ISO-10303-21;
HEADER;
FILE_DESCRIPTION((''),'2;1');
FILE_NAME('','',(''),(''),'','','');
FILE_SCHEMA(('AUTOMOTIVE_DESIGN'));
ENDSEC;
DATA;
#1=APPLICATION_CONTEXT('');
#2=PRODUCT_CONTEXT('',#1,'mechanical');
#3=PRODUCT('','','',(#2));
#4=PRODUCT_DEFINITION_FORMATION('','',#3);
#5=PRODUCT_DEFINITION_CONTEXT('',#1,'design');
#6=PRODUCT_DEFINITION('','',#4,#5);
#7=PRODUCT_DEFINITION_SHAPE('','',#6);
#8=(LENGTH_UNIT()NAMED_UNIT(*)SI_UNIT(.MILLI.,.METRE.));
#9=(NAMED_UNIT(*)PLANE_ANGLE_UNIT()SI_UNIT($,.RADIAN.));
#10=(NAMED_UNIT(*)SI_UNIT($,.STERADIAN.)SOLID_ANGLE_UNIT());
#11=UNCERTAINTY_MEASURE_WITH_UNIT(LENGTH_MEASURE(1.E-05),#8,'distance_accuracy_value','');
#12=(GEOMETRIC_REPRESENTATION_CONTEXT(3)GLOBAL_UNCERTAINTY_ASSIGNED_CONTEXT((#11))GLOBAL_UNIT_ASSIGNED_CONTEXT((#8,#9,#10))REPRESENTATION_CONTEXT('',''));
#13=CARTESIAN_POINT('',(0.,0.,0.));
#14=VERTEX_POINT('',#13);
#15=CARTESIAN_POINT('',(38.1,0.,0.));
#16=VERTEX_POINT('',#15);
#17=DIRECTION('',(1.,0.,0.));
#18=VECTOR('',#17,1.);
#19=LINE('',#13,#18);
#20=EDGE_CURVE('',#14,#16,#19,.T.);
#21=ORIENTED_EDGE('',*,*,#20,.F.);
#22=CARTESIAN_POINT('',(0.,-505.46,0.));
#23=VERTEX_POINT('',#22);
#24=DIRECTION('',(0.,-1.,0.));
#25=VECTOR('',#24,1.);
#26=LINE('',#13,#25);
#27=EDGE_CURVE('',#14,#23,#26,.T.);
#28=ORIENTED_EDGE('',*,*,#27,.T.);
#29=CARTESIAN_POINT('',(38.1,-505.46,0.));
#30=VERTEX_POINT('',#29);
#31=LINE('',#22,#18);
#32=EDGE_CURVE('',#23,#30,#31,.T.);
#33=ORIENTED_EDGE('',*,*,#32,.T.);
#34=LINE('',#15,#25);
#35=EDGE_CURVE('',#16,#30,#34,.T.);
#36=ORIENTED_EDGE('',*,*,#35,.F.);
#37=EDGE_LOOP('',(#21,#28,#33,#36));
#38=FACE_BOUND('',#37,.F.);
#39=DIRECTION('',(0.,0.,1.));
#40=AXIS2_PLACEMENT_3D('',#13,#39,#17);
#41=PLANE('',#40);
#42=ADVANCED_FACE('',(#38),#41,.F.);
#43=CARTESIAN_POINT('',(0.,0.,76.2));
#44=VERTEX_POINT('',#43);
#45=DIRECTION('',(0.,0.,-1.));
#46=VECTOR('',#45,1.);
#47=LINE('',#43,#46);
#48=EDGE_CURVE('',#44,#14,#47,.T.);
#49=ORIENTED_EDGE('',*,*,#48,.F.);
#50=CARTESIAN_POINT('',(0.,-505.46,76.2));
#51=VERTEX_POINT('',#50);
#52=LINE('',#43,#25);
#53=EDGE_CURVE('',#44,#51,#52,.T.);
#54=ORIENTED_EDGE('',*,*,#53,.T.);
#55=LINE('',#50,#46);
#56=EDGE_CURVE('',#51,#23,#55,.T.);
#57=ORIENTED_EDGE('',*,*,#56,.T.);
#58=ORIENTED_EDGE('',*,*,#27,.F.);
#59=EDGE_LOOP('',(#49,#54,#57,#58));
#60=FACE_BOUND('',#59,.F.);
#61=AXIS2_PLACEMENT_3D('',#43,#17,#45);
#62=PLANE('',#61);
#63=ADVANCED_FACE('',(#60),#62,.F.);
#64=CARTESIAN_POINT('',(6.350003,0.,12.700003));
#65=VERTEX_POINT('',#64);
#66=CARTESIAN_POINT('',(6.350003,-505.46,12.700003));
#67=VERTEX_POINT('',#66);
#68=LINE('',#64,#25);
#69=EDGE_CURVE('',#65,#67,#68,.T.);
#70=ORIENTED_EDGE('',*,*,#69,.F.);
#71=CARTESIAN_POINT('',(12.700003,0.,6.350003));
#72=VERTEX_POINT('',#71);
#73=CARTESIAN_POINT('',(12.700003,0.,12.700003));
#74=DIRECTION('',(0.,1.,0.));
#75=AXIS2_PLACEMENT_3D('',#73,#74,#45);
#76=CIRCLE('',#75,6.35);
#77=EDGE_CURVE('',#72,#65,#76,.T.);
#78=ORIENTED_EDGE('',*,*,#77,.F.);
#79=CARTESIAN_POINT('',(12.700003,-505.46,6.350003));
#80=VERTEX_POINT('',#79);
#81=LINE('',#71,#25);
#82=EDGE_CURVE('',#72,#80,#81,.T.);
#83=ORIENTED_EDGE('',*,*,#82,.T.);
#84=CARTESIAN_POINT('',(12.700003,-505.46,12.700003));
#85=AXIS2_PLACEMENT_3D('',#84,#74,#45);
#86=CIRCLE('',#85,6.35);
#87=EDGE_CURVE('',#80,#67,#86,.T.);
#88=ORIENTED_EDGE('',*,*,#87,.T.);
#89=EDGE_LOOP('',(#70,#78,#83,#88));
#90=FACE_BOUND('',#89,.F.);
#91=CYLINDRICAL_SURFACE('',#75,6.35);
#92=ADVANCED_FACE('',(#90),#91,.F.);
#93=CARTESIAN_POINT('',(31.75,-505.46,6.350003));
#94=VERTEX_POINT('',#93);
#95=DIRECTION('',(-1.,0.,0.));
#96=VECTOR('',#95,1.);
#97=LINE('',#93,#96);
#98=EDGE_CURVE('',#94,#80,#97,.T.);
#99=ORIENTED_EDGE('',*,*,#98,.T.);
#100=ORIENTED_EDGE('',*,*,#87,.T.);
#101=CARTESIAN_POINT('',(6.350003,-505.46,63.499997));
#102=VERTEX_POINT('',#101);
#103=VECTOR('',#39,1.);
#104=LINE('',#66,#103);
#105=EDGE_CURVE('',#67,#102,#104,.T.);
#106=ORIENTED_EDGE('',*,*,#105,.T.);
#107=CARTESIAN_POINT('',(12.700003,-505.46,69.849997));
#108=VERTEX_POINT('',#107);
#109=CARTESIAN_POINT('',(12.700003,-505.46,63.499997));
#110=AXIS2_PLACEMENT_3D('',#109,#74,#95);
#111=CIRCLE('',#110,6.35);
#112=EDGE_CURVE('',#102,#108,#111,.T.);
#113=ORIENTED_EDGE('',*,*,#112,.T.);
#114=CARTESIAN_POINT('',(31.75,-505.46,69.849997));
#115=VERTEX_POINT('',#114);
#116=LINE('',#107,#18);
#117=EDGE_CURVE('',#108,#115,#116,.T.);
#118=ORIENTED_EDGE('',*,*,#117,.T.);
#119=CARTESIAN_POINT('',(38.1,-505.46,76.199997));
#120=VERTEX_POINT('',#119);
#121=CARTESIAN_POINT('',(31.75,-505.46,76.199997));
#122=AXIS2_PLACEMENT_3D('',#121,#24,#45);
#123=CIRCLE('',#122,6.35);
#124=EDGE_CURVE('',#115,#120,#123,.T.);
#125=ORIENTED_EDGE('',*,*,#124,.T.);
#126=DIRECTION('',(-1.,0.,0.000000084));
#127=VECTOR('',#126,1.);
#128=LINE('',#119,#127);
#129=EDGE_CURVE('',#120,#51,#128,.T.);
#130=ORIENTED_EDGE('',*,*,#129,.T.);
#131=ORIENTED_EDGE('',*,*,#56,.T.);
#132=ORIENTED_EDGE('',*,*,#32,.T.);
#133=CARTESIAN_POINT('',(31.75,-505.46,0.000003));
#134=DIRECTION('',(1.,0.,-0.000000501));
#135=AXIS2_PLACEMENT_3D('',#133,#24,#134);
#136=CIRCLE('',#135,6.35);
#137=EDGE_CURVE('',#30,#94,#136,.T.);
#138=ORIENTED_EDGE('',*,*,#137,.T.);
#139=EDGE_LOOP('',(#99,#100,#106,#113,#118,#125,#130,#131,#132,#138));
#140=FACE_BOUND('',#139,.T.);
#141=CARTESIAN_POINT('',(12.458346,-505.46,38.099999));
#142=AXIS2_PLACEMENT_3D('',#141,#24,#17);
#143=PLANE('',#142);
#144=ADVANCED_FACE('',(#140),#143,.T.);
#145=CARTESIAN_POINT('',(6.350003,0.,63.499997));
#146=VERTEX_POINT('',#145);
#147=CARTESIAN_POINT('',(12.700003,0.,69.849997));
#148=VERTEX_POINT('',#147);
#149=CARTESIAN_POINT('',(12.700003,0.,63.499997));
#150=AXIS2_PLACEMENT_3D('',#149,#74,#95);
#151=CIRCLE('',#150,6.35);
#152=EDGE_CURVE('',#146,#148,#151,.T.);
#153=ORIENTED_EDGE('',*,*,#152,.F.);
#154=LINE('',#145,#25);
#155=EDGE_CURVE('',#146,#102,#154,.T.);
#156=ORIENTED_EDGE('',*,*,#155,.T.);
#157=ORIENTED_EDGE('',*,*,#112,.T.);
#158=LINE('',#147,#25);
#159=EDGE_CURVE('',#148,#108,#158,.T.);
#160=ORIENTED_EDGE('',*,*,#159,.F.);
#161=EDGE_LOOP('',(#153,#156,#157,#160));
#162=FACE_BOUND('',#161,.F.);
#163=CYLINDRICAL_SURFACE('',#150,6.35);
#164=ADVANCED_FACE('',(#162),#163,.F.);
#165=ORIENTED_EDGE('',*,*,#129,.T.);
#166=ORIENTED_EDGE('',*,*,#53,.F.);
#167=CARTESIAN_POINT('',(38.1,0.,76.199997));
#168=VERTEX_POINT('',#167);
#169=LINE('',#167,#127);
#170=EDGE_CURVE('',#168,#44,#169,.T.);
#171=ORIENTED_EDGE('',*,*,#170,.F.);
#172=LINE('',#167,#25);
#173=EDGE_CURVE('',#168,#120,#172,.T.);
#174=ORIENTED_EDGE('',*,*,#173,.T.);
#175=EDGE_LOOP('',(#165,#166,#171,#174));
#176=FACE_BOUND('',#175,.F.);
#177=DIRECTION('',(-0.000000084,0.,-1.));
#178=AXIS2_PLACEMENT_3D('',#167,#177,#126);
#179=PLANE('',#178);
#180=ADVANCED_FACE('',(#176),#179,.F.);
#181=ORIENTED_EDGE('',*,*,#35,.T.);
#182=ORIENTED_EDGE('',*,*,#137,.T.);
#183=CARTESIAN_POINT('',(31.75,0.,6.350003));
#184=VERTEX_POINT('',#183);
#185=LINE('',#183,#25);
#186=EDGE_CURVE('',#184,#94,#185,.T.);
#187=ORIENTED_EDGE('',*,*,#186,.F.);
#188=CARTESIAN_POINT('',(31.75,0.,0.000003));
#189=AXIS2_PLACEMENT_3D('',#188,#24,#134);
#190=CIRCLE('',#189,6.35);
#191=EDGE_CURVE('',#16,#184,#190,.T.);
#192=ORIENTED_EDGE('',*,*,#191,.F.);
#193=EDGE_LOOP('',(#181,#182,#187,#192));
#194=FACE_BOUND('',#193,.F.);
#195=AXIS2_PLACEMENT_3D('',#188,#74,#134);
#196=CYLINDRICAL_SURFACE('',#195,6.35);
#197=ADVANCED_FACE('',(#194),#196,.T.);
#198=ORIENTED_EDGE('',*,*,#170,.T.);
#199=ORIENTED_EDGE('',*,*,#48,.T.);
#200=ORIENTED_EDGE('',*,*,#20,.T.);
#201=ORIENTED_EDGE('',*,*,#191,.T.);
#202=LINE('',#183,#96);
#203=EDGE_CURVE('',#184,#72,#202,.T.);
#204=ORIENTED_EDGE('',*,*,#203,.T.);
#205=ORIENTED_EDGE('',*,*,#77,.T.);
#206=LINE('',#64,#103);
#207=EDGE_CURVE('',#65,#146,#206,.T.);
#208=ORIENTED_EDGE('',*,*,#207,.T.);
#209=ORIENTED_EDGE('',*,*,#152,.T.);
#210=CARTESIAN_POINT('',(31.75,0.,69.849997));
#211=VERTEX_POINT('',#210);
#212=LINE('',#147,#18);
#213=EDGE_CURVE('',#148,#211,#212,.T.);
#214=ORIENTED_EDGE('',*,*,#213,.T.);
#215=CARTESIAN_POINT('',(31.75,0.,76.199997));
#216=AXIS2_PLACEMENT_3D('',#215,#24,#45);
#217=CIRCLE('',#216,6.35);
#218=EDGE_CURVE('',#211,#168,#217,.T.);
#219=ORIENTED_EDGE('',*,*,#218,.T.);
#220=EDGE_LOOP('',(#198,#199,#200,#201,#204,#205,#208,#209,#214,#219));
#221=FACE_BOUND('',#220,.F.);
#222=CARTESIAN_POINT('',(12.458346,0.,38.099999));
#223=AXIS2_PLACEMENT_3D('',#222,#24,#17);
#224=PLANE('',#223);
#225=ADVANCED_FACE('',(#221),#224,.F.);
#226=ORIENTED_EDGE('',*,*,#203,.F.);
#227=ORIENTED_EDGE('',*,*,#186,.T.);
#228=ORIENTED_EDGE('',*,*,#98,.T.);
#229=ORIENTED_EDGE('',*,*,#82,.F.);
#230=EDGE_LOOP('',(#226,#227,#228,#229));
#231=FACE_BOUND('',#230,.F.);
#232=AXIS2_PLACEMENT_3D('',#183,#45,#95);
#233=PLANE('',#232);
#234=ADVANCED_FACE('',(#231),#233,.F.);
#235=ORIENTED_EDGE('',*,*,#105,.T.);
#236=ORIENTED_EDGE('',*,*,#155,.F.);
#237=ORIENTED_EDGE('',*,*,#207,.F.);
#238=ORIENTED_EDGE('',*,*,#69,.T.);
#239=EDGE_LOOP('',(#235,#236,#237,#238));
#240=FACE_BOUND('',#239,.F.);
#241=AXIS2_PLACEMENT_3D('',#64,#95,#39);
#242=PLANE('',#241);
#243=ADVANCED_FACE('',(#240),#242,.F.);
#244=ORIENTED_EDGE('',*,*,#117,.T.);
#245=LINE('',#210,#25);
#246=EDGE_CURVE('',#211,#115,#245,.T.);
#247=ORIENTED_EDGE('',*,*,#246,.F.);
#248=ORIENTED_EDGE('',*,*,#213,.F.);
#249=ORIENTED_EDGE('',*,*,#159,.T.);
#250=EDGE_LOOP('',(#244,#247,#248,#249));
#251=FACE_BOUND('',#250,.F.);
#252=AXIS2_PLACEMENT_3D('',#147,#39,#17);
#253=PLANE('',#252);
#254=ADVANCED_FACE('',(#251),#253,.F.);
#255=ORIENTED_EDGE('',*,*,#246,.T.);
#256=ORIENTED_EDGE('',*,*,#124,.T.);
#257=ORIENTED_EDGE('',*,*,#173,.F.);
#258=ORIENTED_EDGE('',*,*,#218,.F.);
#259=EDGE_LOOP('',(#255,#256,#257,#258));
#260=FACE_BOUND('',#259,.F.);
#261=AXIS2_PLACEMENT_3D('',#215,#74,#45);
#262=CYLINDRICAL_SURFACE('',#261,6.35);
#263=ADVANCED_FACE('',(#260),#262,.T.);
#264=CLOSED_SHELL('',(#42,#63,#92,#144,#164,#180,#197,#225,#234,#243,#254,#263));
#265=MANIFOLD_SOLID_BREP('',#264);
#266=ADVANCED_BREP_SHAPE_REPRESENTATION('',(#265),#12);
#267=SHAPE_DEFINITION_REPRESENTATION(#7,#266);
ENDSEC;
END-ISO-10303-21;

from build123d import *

# Parameters (mm, degrees)
F1_DEPTH = 505.46


# Not quite as in the source:
# - ends of sketch curves that miss each other by under 0.0002 mm in the source are joined


with BuildPart() as f1:
    # F0 (on Front) → F1 (new body)
    with BuildSketch(Plane.XZ):
        with BuildLine():
            Line((0, 76.2), (0, 0))
            Line((0, 0), (38.1, 0))
            ThreePointArc((38.1, 0), (36.2401280605, 4.4901312434), (31.75, 6.3500031829))
            Line((31.75, 6.3500031829), (12.7000031829, 6.3500031829))
            ThreePointArc((12.7000031829, 6.3500031829), (8.2098751224, 8.2098751224), (6.3500031829, 12.7000031829))
            Line((6.3500031829, 12.7000031829), (6.3500031829, 63.4999968171))
            ThreePointArc((6.3500031829, 63.4999968171), (8.2098751224, 67.9901248776), (12.7000031829, 69.8499968171))
            Line((12.7000031829, 69.8499968171), (31.75, 69.8499968171))
            ThreePointArc((31.75, 69.8499968171), (36.2401280605, 71.7098687566), (38.1, 76.1999968171))
            Line((38.1, 76.1999968171), (0, 76.2))
        make_face()
    extrude(amount=F1_DEPTH)


solid = f1.part
